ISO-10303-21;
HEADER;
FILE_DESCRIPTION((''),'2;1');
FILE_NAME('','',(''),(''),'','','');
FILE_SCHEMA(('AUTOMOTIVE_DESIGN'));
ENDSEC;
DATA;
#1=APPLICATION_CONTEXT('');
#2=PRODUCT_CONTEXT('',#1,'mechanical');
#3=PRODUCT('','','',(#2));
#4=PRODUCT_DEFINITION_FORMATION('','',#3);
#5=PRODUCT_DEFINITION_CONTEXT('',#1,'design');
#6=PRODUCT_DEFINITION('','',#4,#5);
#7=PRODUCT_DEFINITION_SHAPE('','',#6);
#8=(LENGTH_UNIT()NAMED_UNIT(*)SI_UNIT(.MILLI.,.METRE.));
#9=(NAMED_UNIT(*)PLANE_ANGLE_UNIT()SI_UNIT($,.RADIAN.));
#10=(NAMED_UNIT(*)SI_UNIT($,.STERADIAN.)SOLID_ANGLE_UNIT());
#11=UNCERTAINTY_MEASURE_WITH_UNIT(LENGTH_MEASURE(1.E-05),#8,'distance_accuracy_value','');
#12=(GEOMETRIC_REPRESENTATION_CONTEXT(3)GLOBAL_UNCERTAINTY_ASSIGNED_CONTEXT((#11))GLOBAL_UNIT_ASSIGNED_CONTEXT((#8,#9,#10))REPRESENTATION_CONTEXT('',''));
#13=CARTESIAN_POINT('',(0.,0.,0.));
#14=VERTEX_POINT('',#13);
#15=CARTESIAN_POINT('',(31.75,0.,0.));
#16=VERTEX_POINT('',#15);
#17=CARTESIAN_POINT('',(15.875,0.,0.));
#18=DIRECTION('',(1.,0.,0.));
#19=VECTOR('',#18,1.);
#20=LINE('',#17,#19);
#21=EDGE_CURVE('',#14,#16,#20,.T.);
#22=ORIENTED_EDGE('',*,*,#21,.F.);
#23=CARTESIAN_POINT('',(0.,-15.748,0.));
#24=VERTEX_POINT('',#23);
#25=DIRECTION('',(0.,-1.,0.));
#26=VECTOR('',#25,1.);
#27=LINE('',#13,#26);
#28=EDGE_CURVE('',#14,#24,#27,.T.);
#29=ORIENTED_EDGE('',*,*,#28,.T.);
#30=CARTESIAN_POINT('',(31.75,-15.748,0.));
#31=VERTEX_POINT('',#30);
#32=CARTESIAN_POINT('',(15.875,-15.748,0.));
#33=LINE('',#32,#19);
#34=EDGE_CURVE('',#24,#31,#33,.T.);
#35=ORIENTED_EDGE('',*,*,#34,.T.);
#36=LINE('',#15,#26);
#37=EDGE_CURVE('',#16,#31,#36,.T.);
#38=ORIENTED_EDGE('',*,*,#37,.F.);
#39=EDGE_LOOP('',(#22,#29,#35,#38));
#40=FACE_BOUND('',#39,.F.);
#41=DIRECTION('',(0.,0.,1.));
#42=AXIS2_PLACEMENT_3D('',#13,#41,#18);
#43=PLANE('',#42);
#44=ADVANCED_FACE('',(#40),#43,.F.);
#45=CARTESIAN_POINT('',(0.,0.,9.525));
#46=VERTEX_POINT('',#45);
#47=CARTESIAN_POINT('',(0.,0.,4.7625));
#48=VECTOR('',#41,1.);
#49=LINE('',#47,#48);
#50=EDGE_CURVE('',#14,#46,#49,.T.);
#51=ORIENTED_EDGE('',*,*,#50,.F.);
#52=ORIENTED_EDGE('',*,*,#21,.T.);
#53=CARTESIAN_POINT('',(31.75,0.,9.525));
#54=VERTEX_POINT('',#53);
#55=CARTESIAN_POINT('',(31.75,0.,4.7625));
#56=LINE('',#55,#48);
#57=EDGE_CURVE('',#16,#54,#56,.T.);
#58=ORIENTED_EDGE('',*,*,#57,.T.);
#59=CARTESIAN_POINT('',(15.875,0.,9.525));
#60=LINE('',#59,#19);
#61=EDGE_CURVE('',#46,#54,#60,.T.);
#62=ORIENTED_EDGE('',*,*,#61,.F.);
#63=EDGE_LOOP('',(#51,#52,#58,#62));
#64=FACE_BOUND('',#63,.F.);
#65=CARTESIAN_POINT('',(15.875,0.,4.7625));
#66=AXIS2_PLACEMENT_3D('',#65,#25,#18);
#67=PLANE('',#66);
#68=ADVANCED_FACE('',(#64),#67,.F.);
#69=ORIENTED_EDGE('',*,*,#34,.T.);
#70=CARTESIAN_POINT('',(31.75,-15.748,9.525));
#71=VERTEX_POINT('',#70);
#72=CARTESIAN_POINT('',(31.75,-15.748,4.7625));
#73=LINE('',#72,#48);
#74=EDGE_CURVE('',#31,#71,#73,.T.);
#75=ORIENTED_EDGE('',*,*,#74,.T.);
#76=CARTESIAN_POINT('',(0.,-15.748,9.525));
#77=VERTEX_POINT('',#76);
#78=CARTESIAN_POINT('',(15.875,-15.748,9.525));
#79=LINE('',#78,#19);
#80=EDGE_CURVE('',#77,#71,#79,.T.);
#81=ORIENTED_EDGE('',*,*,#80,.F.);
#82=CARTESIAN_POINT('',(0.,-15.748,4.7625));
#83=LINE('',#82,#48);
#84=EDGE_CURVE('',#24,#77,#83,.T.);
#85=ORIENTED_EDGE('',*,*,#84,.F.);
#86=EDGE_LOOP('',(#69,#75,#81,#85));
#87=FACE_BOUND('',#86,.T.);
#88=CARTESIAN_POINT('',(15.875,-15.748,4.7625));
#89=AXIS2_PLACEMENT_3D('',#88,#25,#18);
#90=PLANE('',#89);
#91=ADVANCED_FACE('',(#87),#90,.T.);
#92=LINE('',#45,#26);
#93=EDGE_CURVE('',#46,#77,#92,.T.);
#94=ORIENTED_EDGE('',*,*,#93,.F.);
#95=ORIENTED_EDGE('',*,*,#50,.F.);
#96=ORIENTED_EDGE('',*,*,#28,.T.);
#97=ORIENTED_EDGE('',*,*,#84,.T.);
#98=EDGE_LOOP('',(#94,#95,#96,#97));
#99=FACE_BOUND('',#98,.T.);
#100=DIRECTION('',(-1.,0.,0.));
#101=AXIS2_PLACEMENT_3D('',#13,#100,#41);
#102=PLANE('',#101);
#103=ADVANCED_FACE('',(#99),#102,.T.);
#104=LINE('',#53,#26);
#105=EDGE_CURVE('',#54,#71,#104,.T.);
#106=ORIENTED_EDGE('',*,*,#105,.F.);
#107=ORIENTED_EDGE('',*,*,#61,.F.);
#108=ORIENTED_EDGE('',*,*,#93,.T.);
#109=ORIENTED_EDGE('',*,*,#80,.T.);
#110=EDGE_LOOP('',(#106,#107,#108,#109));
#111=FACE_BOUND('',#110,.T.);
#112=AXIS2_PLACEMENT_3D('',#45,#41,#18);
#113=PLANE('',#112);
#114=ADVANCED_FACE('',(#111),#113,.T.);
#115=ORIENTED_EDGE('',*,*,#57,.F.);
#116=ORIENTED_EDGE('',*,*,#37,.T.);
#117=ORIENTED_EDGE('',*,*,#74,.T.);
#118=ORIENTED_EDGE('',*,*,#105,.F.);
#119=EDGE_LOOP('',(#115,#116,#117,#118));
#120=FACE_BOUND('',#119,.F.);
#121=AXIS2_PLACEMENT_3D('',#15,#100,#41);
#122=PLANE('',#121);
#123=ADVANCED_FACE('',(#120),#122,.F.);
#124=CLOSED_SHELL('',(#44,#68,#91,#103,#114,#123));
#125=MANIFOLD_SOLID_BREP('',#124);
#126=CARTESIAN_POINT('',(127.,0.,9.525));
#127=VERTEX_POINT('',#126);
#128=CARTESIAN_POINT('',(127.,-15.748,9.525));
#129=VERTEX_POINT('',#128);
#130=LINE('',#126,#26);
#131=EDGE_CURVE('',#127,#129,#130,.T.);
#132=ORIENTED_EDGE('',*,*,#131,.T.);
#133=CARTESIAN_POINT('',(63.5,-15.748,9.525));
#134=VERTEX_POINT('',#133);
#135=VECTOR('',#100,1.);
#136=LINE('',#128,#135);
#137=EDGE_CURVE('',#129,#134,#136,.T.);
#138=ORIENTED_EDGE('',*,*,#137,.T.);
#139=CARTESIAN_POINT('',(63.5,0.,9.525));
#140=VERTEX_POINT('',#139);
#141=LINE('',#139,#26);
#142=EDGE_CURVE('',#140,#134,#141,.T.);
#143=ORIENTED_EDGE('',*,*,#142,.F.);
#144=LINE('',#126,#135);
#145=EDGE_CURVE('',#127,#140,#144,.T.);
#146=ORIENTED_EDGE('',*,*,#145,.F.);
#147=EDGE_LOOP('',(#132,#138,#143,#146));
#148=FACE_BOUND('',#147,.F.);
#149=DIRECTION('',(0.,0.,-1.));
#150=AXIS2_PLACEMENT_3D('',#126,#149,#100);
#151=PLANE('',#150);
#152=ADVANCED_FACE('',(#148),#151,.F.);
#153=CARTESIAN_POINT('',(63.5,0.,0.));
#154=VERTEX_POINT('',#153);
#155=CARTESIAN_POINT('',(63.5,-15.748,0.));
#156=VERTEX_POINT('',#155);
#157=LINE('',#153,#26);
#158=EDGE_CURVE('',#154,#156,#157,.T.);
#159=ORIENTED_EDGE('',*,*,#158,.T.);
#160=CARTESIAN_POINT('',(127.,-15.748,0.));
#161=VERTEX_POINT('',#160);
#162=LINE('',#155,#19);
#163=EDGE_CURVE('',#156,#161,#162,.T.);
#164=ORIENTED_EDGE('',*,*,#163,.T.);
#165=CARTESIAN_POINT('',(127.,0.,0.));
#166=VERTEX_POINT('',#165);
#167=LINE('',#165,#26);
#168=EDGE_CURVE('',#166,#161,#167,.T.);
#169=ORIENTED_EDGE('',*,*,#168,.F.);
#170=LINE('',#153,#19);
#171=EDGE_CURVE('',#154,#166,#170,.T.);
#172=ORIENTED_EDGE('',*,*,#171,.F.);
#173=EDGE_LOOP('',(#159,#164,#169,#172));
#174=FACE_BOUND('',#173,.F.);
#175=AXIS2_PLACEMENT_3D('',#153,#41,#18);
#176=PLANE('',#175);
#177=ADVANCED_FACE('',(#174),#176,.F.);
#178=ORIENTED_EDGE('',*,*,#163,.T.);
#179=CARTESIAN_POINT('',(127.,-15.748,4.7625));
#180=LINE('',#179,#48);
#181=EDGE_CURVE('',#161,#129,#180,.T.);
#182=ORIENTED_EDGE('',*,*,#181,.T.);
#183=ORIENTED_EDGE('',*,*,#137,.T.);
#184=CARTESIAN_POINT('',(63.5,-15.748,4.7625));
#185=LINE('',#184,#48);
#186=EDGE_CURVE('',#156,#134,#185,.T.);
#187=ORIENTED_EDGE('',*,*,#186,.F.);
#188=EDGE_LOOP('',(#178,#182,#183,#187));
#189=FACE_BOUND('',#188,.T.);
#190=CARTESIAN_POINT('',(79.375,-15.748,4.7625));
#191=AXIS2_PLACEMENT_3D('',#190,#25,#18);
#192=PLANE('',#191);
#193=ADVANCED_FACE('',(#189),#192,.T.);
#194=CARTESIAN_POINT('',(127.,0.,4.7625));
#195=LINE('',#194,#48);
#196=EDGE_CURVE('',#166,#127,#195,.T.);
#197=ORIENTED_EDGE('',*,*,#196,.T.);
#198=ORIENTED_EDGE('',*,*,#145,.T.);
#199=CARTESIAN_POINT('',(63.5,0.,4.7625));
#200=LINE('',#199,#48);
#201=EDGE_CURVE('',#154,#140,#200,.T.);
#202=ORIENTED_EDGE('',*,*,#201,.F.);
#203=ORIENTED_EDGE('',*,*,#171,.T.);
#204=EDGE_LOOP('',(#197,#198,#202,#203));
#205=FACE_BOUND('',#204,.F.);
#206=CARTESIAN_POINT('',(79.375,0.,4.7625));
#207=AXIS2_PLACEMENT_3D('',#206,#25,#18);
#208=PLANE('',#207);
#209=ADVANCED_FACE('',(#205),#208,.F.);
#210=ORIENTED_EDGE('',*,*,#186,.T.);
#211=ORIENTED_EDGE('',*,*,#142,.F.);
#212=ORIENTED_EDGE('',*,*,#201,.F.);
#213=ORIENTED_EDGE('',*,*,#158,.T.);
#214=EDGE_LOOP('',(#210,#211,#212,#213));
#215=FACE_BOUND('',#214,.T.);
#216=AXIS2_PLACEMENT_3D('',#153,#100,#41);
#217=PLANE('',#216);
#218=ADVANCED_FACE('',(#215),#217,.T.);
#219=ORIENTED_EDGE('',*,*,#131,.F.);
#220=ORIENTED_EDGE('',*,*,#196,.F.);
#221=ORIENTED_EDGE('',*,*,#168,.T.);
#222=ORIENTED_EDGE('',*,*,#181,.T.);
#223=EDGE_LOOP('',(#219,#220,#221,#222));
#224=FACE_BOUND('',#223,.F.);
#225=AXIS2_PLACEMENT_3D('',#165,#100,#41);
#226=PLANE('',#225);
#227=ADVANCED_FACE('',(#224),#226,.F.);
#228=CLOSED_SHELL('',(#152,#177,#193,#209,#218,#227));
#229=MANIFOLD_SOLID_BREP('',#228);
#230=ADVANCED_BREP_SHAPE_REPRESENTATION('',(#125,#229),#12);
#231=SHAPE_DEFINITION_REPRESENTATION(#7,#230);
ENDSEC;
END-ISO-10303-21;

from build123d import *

# Parameters (mm, degrees)
F0_W     = 31.75
F0_H     = 9.525
F1_DEPTH = 15.748


with BuildPart() as f1:
    # F0 (on Front) → F1 (new body)
    with BuildSketch(Plane.XZ):
        with Locations((15.875, 4.7625)):
            Rectangle(F0_W, F0_H)
    extrude(amount=F1_DEPTH)


with BuildPart() as f1b:
    # F0 (on Front) → F1, piece 2 (new body)
    with BuildSketch(Plane.XZ):
        with Locations((79.375, 4.7625)):
            Rectangle(F0_W, F0_H)
        with Locations((111.125, 4.7625)):
            Rectangle(F0_W, F0_H)
    extrude(amount=F1_DEPTH)


solid = Compound([f1.part, f1b.part])
